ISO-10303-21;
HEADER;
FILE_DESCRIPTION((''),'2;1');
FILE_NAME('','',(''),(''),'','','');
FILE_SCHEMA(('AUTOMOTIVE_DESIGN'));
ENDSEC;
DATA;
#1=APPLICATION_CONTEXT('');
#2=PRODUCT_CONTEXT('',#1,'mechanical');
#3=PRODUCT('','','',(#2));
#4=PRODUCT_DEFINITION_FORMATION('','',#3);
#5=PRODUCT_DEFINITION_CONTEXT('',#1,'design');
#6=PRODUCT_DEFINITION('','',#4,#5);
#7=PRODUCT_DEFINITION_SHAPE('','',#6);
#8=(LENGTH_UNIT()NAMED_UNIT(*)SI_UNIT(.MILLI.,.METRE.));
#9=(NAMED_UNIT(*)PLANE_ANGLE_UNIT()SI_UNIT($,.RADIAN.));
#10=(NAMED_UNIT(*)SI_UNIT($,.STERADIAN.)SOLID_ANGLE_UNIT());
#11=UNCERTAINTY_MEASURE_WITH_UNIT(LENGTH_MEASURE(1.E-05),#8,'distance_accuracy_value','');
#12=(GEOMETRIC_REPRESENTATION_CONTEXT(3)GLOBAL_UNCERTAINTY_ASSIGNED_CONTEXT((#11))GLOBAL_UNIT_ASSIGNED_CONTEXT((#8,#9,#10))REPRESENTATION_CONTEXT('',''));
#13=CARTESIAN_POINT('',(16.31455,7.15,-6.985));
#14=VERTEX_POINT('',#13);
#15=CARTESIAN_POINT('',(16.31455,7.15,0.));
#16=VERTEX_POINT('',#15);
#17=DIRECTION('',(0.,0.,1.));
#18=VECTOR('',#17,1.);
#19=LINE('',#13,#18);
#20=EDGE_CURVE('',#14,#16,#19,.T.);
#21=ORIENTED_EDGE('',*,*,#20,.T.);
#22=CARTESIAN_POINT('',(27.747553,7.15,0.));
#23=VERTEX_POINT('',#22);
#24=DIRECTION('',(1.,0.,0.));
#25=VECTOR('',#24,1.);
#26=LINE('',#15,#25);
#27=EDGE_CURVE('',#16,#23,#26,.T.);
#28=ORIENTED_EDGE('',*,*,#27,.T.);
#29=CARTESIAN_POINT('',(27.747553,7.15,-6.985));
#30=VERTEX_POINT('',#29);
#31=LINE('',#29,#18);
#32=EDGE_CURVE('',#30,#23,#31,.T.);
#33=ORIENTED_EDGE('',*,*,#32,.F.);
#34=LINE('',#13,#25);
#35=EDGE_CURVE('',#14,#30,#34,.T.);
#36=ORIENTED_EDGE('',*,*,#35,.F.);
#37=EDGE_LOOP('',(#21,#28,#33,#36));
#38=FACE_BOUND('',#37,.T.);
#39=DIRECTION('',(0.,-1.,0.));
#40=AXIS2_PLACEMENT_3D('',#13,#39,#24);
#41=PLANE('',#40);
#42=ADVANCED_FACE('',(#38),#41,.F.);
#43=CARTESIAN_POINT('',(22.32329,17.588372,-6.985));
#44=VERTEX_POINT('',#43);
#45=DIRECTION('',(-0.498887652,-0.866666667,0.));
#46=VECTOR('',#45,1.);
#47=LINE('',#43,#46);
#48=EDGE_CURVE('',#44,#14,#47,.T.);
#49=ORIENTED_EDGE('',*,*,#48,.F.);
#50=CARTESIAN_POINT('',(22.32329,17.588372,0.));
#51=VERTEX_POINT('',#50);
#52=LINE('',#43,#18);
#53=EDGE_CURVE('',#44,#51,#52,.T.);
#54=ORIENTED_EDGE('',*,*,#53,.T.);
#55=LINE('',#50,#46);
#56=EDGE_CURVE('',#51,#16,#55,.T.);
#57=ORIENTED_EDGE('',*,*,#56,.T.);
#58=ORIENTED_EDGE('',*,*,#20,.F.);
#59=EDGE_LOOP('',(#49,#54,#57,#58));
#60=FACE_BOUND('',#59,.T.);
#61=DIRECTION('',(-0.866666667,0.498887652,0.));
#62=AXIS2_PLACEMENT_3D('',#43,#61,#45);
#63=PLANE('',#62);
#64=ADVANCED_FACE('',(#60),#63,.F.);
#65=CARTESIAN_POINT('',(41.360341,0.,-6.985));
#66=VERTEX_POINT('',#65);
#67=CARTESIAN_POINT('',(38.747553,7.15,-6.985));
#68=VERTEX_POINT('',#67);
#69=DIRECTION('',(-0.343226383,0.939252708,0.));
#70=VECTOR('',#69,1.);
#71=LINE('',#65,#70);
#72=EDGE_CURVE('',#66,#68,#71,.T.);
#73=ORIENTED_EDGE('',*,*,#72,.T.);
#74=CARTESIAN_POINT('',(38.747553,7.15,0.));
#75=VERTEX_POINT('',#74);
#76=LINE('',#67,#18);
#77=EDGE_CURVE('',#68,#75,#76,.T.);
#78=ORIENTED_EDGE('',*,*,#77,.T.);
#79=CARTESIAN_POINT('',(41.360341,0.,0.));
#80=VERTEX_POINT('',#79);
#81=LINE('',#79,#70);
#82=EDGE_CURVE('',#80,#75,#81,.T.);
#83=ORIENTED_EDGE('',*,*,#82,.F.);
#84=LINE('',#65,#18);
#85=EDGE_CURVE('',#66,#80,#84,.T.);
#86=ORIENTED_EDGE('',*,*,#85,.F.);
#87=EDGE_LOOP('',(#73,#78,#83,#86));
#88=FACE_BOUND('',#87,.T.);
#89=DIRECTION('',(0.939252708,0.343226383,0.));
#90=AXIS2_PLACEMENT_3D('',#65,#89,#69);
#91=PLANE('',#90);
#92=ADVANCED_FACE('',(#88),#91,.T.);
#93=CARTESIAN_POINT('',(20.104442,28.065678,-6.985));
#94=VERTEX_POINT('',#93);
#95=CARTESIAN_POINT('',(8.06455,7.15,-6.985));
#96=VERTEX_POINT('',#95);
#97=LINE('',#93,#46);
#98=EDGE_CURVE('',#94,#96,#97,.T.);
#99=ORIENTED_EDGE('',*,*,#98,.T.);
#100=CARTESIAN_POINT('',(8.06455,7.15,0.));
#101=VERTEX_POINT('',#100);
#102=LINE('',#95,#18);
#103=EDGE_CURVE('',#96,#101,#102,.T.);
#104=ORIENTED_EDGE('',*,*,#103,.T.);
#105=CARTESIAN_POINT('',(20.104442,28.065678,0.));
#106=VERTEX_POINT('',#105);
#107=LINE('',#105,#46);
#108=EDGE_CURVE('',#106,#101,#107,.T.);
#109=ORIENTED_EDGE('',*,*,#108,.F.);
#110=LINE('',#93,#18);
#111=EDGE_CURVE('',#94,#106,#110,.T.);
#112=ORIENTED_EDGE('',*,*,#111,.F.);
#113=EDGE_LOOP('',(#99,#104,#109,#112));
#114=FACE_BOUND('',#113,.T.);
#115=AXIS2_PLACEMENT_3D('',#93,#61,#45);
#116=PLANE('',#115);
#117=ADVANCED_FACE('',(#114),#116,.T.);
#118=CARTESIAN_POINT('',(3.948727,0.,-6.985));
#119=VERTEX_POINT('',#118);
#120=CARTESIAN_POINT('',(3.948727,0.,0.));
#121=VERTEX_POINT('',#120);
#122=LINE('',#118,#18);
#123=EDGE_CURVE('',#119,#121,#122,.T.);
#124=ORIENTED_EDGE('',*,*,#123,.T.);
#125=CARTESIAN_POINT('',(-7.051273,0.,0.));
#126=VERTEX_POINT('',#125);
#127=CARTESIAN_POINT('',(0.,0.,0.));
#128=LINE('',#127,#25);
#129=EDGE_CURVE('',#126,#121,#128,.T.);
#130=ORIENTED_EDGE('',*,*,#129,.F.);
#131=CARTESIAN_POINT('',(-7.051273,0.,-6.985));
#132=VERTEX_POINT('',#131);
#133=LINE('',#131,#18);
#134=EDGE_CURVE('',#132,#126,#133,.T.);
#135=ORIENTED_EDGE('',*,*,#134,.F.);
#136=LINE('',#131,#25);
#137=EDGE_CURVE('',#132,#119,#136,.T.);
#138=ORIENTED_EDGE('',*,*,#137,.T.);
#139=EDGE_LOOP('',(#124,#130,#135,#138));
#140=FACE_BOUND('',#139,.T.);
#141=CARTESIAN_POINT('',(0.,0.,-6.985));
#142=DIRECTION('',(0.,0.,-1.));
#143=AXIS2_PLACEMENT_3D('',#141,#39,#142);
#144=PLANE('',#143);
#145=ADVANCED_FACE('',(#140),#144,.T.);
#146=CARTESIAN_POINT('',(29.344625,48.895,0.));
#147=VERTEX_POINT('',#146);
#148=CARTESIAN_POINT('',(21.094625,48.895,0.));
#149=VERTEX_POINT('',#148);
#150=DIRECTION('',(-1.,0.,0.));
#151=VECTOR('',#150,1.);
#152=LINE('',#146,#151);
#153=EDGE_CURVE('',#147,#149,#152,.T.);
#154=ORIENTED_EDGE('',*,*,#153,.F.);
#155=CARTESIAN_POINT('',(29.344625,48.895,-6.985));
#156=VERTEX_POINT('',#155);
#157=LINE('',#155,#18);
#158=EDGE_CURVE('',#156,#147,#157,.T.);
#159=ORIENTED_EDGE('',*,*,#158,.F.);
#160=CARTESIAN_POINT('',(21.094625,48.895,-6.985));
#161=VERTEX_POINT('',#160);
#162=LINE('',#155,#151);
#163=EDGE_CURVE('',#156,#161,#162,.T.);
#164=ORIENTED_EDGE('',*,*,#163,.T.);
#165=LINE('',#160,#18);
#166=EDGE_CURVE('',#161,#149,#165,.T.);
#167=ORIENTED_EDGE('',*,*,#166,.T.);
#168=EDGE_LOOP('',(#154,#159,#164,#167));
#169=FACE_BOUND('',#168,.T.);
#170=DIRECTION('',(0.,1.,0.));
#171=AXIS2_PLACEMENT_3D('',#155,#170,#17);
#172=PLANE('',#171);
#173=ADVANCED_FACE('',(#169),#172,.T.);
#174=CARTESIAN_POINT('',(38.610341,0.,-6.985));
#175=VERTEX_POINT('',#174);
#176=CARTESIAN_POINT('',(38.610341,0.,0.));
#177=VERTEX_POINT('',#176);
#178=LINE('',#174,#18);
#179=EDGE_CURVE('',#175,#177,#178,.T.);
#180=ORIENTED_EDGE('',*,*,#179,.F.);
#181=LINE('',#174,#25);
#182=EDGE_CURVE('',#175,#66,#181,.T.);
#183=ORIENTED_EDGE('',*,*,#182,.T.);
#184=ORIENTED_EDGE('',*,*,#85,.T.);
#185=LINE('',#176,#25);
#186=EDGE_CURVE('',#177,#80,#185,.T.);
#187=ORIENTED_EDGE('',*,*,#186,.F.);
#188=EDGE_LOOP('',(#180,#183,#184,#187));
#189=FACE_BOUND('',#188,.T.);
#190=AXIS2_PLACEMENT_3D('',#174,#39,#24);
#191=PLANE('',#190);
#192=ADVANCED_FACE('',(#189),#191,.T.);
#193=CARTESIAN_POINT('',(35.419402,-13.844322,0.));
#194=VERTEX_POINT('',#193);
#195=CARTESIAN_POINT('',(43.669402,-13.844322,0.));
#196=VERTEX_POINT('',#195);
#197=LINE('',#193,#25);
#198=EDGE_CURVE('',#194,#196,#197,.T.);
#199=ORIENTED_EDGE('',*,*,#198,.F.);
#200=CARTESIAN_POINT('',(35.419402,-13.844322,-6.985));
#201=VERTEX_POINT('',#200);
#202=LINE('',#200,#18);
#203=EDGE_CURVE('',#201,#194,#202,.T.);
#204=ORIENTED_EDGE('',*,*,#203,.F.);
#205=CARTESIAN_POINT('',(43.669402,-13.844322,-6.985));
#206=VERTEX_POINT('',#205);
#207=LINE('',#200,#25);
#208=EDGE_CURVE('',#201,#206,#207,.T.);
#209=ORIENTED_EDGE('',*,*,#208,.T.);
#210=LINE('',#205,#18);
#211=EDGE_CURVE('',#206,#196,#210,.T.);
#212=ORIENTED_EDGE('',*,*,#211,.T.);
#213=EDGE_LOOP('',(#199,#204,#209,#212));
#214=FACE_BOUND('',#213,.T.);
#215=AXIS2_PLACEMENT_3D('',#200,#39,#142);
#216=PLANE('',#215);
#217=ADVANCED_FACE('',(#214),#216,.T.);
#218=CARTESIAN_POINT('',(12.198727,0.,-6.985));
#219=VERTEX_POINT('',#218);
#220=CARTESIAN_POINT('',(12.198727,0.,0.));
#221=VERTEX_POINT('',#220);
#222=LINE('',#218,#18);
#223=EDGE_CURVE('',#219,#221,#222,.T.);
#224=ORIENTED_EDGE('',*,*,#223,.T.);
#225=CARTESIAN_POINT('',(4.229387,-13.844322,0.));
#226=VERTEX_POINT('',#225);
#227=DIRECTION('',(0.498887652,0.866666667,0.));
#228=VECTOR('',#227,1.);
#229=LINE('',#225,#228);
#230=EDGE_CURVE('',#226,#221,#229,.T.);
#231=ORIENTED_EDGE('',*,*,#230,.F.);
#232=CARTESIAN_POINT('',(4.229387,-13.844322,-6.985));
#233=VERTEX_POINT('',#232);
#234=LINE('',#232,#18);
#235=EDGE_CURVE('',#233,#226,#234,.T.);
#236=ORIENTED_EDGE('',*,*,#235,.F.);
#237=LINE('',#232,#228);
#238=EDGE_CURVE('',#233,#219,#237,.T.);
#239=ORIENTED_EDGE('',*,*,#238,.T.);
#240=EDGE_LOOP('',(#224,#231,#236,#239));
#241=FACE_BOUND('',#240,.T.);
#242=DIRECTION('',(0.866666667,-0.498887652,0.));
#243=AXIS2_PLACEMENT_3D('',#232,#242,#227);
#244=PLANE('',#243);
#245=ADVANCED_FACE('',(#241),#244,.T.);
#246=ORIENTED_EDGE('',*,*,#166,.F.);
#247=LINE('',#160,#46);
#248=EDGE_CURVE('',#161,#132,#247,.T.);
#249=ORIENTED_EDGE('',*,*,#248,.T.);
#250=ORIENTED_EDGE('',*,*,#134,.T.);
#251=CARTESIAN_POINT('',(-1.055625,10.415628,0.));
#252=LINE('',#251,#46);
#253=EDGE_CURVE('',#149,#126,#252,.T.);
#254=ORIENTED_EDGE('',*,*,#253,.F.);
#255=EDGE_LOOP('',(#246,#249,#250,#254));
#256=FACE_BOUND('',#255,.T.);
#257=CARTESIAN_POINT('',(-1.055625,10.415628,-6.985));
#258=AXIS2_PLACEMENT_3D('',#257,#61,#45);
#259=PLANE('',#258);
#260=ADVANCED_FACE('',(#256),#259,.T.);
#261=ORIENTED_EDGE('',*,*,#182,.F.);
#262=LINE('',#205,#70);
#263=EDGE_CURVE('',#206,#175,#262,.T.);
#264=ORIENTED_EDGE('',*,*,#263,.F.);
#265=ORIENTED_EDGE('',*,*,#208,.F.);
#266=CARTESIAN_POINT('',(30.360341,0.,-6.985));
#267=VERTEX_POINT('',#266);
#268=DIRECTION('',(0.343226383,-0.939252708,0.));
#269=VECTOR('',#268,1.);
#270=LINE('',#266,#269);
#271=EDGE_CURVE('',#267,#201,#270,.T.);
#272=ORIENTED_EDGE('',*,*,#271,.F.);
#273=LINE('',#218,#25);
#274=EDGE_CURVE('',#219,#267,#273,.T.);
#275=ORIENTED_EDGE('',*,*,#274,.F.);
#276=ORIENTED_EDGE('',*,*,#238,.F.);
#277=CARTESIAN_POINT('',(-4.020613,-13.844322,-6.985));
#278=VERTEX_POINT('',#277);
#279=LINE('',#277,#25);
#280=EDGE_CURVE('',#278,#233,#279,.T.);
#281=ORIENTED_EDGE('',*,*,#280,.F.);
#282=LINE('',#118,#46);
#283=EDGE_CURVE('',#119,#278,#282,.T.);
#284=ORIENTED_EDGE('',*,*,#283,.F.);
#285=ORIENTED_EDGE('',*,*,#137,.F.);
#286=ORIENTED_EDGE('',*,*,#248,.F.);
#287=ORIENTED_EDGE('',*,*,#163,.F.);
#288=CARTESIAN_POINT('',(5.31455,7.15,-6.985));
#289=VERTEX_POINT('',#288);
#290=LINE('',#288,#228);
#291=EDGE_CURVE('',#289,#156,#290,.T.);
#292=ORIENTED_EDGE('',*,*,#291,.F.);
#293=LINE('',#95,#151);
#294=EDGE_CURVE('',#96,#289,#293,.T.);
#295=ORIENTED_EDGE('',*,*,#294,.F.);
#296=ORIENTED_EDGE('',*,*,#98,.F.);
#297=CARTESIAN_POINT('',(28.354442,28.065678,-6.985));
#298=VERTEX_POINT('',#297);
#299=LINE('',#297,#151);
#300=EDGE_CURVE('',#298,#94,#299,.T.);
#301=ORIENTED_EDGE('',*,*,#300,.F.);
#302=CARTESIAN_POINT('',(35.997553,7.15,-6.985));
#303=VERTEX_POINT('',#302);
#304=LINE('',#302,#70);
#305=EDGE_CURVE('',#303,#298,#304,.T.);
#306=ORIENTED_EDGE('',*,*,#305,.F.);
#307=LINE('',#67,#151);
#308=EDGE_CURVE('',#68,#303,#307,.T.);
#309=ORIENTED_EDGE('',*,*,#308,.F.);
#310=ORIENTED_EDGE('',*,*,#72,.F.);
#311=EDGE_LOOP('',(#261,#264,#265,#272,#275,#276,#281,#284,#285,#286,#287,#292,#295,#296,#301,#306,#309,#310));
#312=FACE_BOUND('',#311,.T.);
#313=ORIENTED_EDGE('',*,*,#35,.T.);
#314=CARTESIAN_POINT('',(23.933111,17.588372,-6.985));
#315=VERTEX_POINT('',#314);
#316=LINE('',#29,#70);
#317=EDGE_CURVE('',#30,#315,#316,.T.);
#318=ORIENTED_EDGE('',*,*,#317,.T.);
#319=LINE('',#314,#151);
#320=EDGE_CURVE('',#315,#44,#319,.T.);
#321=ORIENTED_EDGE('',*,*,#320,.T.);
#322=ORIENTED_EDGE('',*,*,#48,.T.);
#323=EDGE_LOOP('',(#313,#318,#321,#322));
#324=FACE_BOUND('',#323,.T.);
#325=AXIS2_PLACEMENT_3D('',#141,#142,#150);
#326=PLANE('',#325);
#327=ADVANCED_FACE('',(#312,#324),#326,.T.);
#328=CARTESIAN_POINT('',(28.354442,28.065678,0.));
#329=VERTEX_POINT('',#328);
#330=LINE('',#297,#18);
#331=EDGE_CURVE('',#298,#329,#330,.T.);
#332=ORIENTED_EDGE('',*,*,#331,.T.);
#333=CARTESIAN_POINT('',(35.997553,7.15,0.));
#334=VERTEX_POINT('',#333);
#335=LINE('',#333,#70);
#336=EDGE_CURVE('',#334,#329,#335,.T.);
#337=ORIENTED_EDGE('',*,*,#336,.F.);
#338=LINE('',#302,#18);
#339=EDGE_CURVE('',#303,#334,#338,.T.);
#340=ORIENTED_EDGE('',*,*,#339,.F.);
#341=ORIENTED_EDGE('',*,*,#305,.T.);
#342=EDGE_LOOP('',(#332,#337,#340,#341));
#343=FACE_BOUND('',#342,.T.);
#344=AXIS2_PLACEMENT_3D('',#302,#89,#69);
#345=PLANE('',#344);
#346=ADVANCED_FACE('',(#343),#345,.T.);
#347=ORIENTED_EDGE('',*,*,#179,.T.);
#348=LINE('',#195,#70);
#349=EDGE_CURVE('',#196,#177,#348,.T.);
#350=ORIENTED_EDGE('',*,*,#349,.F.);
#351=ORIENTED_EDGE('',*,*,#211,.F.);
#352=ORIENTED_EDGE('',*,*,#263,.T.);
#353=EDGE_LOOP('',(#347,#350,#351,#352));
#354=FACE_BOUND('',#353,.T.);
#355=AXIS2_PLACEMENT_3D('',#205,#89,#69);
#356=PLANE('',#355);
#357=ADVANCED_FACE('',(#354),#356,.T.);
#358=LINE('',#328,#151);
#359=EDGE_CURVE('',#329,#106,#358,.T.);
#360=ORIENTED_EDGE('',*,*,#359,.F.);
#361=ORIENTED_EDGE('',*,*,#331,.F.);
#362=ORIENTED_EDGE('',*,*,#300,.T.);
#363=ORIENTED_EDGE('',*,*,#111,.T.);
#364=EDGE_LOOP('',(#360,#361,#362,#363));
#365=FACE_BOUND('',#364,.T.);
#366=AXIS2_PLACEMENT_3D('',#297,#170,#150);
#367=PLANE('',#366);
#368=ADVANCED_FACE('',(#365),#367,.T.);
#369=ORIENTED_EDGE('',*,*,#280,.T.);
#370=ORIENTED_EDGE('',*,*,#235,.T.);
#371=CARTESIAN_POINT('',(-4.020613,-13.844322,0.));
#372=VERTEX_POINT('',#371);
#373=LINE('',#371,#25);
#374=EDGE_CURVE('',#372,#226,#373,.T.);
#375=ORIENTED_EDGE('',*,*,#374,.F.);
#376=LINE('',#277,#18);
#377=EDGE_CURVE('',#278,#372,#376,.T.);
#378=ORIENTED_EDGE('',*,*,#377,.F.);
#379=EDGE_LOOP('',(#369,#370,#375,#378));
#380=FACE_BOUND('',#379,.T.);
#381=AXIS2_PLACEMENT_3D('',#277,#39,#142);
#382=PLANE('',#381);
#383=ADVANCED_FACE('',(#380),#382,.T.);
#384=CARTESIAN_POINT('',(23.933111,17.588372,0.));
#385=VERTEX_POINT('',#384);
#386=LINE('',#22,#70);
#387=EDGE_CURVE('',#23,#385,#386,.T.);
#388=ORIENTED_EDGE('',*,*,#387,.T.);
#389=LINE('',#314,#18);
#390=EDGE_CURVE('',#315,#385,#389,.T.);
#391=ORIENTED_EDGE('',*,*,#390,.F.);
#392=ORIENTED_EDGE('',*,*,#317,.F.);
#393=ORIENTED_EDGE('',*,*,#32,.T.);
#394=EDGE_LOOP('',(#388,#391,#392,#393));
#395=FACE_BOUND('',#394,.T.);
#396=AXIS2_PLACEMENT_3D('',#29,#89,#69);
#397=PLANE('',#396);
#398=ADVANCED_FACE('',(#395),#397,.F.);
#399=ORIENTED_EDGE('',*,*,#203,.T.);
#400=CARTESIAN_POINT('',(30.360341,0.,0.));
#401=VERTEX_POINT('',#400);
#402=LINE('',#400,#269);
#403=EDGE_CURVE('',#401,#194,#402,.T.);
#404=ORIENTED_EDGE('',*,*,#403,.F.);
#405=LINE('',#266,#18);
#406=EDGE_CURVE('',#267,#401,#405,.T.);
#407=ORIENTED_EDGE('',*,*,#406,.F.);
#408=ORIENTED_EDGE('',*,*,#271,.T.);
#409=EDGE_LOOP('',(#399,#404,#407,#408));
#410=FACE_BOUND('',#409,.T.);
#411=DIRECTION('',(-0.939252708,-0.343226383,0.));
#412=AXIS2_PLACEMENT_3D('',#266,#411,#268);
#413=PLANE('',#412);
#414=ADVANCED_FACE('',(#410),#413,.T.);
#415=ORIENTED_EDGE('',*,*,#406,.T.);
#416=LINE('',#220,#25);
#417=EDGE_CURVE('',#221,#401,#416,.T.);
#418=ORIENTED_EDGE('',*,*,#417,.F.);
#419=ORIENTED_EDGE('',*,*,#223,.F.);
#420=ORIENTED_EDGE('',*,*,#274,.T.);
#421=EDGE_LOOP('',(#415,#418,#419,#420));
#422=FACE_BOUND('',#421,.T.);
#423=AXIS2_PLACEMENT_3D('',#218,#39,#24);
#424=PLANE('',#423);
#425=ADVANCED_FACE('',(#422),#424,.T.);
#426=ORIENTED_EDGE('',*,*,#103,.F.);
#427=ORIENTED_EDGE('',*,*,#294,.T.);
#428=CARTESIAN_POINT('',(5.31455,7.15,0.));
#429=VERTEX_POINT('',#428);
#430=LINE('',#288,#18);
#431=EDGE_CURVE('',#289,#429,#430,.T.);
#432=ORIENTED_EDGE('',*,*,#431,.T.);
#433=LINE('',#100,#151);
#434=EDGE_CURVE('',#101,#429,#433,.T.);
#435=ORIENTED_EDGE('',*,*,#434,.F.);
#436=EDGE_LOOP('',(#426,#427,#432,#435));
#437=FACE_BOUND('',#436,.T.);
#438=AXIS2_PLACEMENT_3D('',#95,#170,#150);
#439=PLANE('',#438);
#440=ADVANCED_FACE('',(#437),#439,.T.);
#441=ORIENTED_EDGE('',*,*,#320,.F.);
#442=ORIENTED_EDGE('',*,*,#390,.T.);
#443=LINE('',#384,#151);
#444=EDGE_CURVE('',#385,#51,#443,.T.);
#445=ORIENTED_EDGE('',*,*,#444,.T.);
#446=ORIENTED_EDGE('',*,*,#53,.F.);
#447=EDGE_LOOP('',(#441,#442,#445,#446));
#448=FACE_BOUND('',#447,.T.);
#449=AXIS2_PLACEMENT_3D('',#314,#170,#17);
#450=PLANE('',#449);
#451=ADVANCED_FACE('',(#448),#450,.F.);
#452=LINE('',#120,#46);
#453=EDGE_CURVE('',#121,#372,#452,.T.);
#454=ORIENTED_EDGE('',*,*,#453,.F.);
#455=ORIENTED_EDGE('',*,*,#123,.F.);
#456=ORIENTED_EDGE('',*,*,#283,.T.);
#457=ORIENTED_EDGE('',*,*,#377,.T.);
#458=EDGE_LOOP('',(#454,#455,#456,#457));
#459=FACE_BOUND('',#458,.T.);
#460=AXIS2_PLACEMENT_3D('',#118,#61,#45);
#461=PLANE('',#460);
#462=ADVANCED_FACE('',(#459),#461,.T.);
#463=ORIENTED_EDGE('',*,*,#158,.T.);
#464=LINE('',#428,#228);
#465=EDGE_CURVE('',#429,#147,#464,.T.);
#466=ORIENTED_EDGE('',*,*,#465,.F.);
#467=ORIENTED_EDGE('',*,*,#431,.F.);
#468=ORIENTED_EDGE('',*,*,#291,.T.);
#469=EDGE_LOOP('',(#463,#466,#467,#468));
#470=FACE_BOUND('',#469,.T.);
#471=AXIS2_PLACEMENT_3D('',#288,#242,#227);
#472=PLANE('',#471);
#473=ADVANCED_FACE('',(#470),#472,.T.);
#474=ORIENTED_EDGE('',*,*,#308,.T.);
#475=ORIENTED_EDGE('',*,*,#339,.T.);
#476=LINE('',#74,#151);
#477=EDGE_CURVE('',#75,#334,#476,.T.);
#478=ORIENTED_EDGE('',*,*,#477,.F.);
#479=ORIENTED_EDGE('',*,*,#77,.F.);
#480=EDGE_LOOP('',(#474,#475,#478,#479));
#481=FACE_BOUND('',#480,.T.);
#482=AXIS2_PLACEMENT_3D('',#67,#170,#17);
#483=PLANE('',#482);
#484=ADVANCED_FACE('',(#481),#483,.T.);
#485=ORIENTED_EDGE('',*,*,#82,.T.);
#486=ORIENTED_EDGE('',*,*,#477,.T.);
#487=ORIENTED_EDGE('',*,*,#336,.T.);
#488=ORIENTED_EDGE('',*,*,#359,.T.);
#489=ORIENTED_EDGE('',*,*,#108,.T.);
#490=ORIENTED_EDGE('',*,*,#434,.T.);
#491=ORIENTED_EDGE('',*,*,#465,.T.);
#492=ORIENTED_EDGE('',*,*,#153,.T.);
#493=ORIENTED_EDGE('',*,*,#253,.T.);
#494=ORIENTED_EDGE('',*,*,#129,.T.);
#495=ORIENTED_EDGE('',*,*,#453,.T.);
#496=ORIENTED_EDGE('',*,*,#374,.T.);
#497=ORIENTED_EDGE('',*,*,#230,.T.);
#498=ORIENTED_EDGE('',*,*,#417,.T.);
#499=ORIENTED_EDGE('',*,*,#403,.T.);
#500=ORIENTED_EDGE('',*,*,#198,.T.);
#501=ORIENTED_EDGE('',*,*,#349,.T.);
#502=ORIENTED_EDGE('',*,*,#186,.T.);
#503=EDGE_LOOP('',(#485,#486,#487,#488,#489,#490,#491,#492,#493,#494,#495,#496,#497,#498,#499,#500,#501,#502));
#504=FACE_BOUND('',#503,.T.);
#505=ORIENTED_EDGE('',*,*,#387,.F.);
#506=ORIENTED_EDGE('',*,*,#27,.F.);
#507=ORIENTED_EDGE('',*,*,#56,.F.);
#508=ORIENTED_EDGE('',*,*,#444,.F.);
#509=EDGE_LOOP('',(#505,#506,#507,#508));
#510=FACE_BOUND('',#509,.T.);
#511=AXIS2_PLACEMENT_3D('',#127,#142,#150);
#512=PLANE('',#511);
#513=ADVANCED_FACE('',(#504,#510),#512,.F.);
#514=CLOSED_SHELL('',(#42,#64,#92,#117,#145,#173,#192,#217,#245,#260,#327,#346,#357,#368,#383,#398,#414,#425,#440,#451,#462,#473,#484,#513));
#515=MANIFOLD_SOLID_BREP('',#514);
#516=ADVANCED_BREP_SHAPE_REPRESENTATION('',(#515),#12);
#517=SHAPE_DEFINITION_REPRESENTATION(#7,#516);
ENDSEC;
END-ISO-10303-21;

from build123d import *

# Parameters (mm, degrees)
BASE_FLANGE1_DEPTH = 12.7
CUT_EXTRUDE1_DEPTH = 120.869459796
SCALE1_SCALE       = 0.55


# Sheet-metal steps are written as plain solids
with BuildPart() as part:
    # Sketch2 → Base-Flange1 (new body)
    with BuildSketch(Plane.XY):
        Polygon((0, 0), (7.179503017, 0), (-7.310206248, -25.171495006), (7.689793752, -25.171495006), (22.179503017, 0), (55.200620493, 0), (64.398913039, -25.171495006), (79.398913039, -25.171495006), (70.200620493, 0), (75.200620493, 0), (70.450096018, 13), (65.450096018, 13), (51.553531117, 51.028504994), (36.553531117, 51.028504994), (14.662817791, 13), (9.662817791, 13), (53.353863276, 88.9), (38.353863276, 88.9), (-1.919318718, 18.937505869), (-12.820496983, 0), align=None)
    extrude(amount=-BASE_FLANGE1_DEPTH)

    # Sketch12 → Cut-Extrude1 (cut, through all)
    with BuildSketch(Plane.XY):
        Polygon((29.662817791, 13), (50.450096018, 13), (43.514747433, 31.978858458), (40.587800243, 31.978858458), align=None)
    extrude(amount=-CUT_EXTRUDE1_DEPTH, mode=Mode.SUBTRACT)


with BuildPart() as part_1:
    # Scale1: scaled about (0, 0, 0)
    add(part.part.scale(SCALE1_SCALE))


solid = part_1.part
